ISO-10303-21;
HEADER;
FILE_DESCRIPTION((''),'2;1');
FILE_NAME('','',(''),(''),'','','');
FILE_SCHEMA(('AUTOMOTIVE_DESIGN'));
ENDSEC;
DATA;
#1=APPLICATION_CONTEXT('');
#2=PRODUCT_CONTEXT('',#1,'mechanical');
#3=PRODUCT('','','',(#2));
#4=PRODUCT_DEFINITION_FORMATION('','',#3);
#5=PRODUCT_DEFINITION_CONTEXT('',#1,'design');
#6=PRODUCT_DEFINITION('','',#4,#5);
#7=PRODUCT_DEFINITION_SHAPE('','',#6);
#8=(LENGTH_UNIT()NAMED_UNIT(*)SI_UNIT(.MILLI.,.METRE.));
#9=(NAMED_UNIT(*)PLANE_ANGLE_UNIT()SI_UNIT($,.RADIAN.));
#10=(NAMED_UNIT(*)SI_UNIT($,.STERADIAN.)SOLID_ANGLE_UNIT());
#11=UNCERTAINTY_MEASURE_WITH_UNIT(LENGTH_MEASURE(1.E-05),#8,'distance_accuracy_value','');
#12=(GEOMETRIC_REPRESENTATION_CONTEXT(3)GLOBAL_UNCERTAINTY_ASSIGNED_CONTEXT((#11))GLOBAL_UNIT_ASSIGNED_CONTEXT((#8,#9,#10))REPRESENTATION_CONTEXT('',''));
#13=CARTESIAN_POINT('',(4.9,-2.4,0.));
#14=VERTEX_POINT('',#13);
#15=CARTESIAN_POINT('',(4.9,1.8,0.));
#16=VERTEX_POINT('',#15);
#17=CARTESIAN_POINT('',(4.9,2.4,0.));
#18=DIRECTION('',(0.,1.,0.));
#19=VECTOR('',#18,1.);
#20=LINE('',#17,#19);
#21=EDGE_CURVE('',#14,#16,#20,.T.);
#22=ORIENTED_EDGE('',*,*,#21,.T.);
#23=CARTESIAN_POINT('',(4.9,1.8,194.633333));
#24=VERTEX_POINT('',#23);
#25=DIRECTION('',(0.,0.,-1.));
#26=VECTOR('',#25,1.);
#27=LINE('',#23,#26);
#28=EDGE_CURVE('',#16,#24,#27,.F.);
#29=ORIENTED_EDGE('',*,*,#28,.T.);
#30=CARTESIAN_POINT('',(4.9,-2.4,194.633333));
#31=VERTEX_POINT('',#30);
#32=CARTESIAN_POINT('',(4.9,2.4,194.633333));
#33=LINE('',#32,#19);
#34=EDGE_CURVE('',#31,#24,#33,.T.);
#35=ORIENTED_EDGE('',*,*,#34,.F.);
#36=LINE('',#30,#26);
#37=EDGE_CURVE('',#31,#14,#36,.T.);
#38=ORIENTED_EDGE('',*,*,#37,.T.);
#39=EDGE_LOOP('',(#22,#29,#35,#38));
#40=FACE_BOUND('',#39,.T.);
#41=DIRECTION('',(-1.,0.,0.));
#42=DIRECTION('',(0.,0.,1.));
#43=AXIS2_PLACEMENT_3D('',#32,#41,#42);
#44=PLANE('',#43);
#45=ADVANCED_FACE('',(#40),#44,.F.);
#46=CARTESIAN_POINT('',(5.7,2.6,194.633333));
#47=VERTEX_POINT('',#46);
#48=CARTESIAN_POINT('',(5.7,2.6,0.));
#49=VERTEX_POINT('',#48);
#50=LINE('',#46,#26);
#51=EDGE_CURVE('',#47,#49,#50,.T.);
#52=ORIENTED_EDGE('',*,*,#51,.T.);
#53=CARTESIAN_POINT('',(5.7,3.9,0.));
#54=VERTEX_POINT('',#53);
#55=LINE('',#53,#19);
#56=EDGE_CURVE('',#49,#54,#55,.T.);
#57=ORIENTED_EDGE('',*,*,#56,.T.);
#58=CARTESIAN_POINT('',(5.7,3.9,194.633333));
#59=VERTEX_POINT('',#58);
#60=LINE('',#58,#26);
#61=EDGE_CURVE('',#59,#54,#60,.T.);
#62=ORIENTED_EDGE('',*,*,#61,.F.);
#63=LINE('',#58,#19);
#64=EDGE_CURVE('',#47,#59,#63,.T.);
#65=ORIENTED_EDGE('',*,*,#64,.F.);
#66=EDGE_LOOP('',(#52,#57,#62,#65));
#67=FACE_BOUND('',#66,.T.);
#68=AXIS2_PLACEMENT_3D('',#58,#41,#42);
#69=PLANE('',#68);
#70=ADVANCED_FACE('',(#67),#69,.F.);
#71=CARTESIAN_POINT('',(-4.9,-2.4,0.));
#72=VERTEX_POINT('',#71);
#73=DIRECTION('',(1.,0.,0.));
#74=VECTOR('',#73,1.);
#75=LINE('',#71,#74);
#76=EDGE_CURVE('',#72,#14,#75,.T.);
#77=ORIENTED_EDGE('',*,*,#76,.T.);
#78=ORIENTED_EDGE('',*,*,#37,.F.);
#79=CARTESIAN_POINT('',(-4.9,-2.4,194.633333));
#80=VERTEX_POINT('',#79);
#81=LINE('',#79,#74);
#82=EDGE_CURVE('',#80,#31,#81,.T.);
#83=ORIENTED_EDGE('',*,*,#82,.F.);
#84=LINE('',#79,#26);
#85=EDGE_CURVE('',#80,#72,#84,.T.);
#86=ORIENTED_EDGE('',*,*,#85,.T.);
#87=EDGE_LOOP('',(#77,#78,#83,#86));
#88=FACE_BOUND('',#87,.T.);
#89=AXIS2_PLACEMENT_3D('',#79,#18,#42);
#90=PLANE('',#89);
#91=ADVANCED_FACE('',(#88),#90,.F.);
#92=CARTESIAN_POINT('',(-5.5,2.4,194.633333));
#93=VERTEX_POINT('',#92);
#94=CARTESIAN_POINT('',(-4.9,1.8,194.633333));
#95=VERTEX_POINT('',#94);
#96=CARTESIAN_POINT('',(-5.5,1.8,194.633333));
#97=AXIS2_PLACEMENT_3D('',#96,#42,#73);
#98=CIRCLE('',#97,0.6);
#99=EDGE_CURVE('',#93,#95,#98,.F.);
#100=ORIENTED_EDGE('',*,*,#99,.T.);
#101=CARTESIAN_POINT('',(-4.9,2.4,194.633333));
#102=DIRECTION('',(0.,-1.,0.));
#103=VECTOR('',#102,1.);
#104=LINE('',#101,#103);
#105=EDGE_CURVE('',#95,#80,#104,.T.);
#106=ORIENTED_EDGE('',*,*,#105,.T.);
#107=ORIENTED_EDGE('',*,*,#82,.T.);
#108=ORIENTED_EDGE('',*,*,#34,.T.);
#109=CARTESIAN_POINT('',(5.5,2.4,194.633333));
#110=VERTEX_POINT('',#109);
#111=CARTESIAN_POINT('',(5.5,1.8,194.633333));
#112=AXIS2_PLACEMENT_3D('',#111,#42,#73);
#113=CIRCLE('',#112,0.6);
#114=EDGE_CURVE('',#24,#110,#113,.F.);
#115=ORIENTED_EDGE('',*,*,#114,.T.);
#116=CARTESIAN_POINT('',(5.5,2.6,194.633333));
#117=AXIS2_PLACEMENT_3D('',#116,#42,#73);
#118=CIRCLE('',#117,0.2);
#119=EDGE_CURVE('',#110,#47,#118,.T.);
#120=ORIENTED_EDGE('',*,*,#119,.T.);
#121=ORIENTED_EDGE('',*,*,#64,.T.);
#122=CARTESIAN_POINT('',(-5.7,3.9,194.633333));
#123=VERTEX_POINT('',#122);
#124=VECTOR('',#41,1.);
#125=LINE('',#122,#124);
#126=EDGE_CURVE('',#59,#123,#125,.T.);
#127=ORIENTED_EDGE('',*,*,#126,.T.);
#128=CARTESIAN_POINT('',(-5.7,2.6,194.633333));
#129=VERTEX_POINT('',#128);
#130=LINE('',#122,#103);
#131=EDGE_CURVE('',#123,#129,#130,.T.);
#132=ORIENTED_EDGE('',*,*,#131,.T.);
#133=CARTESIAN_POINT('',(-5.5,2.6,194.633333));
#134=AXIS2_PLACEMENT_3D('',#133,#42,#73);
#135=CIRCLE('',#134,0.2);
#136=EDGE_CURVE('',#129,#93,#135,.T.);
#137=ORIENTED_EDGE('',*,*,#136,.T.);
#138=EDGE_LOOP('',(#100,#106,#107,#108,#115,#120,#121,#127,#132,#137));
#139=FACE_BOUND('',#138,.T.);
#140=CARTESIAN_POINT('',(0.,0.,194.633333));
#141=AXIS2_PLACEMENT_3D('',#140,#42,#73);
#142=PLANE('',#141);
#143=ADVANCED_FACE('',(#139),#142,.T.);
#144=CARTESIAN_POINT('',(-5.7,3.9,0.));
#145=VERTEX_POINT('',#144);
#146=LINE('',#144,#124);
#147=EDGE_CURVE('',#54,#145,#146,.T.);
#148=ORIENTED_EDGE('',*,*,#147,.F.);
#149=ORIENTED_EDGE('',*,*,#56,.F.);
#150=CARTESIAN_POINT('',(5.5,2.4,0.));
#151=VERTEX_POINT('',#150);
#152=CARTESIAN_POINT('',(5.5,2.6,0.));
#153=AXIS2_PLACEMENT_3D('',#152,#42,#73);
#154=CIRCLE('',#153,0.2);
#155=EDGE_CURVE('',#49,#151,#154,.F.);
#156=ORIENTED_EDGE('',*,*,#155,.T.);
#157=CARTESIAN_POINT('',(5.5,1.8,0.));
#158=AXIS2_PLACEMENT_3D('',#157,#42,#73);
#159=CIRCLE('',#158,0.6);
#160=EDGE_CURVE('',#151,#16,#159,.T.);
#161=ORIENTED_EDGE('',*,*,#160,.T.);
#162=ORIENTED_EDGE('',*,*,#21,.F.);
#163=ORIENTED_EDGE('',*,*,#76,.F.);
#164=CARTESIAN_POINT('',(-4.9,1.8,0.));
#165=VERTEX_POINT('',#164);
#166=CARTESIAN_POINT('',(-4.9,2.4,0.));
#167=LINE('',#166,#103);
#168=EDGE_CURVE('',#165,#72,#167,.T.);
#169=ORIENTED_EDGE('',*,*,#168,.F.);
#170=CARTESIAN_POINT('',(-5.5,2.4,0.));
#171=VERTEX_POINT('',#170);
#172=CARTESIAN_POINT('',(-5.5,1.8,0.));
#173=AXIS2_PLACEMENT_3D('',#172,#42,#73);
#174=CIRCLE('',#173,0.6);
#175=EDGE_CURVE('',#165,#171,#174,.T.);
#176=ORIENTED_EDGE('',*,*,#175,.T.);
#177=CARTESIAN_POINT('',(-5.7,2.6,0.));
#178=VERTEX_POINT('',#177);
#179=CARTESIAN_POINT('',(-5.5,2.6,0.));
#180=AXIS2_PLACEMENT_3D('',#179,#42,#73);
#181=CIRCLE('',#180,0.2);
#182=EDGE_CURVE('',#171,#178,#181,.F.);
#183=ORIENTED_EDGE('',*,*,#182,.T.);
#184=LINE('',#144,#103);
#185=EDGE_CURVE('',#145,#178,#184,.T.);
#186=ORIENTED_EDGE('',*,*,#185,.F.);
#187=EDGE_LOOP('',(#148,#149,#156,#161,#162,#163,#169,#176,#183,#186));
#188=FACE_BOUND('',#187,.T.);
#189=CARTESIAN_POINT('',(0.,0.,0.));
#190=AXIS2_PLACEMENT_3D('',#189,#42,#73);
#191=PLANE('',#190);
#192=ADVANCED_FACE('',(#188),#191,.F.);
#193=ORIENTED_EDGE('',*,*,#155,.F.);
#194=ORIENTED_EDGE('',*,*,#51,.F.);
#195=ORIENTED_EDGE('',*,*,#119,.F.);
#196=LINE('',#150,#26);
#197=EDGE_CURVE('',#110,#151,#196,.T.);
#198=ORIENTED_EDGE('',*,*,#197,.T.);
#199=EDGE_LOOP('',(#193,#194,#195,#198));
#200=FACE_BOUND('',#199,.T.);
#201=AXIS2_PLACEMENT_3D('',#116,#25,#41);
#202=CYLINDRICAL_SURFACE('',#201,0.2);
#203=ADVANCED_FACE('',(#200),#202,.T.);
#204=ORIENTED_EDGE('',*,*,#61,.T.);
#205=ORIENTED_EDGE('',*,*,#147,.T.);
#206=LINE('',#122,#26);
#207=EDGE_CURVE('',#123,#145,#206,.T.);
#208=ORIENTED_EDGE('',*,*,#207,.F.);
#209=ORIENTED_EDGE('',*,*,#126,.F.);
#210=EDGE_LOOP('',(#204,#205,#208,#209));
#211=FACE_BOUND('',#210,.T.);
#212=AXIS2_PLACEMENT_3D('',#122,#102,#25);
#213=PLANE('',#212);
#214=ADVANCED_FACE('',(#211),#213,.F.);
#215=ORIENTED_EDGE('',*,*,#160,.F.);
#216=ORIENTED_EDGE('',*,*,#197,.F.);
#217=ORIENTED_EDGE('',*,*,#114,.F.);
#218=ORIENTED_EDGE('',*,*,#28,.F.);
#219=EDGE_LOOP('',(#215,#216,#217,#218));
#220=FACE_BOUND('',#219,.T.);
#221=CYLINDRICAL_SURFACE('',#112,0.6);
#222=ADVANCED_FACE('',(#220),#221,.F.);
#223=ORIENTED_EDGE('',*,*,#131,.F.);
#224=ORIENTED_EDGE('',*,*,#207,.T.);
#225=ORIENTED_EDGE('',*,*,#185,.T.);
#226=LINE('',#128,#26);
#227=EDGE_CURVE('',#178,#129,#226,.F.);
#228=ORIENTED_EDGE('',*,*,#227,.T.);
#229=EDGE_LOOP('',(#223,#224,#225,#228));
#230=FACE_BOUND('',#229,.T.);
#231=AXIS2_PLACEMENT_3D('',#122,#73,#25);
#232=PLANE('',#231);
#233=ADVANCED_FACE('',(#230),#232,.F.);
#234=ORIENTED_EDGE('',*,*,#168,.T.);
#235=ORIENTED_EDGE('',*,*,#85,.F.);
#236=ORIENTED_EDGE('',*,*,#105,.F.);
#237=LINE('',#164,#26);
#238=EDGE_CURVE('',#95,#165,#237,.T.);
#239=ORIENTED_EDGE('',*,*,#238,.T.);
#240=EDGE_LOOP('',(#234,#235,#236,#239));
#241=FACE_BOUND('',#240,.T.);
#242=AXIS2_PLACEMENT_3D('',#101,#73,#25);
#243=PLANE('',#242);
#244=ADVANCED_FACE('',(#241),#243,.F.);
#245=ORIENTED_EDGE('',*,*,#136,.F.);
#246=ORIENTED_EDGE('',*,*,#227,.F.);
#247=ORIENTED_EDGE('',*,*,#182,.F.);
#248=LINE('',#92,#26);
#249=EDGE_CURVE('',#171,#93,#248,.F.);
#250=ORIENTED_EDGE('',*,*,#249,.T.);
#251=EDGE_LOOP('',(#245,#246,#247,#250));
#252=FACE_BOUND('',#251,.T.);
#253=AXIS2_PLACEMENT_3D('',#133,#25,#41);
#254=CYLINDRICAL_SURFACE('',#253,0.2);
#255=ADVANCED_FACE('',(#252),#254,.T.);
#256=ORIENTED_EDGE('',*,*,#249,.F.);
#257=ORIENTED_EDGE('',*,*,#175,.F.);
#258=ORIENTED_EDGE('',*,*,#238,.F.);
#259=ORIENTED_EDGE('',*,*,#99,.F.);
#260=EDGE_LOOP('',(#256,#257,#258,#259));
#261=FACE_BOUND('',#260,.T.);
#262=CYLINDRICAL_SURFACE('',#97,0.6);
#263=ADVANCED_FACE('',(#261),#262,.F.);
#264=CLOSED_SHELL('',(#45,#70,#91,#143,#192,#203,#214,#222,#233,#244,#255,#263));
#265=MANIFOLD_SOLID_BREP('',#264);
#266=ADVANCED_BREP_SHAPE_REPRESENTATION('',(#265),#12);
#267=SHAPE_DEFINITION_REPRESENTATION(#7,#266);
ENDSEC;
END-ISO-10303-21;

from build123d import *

# Parameters (mm, degrees)
BOSS_EXTRUDE1_DEPTH = 194.633333333
FILLET1_R           = 0.6
FILLET2_R           = 0.2


with BuildPart() as part:
    # Sketch1 → Boss-Extrude1 (new body)
    with BuildSketch(Plane.XY):
        Polygon((-5.7, 3.9), (5.7, 3.9), (5.7, 2.4), (4.9, 2.4), (4.9, -2.4), (-4.9, -2.4), (-4.9, 2.4), (-5.7, 2.4), align=None)
    extrude(amount=BOSS_EXTRUDE1_DEPTH)

    # Fillet1
    fillet1_edges = [part.edges().sort_by_distance(p)[0] for p in [
        (-4.9, 2.4, 97.316666667),
        (4.9, 2.4, 97.316666667),
    ]]
    fillet(fillet1_edges, radius=FILLET1_R)

    # Fillet2
    fillet2_edges = [part.edges().sort_by_distance(p)[0] for p in [
        (-5.7, 2.4, 97.316666667),
        (5.7, 2.4, 97.316666667),
    ]]
    fillet(fillet2_edges, radius=FILLET2_R - 0.0001)  # a hair under: the kernel refuses the full size


solid = part.part
